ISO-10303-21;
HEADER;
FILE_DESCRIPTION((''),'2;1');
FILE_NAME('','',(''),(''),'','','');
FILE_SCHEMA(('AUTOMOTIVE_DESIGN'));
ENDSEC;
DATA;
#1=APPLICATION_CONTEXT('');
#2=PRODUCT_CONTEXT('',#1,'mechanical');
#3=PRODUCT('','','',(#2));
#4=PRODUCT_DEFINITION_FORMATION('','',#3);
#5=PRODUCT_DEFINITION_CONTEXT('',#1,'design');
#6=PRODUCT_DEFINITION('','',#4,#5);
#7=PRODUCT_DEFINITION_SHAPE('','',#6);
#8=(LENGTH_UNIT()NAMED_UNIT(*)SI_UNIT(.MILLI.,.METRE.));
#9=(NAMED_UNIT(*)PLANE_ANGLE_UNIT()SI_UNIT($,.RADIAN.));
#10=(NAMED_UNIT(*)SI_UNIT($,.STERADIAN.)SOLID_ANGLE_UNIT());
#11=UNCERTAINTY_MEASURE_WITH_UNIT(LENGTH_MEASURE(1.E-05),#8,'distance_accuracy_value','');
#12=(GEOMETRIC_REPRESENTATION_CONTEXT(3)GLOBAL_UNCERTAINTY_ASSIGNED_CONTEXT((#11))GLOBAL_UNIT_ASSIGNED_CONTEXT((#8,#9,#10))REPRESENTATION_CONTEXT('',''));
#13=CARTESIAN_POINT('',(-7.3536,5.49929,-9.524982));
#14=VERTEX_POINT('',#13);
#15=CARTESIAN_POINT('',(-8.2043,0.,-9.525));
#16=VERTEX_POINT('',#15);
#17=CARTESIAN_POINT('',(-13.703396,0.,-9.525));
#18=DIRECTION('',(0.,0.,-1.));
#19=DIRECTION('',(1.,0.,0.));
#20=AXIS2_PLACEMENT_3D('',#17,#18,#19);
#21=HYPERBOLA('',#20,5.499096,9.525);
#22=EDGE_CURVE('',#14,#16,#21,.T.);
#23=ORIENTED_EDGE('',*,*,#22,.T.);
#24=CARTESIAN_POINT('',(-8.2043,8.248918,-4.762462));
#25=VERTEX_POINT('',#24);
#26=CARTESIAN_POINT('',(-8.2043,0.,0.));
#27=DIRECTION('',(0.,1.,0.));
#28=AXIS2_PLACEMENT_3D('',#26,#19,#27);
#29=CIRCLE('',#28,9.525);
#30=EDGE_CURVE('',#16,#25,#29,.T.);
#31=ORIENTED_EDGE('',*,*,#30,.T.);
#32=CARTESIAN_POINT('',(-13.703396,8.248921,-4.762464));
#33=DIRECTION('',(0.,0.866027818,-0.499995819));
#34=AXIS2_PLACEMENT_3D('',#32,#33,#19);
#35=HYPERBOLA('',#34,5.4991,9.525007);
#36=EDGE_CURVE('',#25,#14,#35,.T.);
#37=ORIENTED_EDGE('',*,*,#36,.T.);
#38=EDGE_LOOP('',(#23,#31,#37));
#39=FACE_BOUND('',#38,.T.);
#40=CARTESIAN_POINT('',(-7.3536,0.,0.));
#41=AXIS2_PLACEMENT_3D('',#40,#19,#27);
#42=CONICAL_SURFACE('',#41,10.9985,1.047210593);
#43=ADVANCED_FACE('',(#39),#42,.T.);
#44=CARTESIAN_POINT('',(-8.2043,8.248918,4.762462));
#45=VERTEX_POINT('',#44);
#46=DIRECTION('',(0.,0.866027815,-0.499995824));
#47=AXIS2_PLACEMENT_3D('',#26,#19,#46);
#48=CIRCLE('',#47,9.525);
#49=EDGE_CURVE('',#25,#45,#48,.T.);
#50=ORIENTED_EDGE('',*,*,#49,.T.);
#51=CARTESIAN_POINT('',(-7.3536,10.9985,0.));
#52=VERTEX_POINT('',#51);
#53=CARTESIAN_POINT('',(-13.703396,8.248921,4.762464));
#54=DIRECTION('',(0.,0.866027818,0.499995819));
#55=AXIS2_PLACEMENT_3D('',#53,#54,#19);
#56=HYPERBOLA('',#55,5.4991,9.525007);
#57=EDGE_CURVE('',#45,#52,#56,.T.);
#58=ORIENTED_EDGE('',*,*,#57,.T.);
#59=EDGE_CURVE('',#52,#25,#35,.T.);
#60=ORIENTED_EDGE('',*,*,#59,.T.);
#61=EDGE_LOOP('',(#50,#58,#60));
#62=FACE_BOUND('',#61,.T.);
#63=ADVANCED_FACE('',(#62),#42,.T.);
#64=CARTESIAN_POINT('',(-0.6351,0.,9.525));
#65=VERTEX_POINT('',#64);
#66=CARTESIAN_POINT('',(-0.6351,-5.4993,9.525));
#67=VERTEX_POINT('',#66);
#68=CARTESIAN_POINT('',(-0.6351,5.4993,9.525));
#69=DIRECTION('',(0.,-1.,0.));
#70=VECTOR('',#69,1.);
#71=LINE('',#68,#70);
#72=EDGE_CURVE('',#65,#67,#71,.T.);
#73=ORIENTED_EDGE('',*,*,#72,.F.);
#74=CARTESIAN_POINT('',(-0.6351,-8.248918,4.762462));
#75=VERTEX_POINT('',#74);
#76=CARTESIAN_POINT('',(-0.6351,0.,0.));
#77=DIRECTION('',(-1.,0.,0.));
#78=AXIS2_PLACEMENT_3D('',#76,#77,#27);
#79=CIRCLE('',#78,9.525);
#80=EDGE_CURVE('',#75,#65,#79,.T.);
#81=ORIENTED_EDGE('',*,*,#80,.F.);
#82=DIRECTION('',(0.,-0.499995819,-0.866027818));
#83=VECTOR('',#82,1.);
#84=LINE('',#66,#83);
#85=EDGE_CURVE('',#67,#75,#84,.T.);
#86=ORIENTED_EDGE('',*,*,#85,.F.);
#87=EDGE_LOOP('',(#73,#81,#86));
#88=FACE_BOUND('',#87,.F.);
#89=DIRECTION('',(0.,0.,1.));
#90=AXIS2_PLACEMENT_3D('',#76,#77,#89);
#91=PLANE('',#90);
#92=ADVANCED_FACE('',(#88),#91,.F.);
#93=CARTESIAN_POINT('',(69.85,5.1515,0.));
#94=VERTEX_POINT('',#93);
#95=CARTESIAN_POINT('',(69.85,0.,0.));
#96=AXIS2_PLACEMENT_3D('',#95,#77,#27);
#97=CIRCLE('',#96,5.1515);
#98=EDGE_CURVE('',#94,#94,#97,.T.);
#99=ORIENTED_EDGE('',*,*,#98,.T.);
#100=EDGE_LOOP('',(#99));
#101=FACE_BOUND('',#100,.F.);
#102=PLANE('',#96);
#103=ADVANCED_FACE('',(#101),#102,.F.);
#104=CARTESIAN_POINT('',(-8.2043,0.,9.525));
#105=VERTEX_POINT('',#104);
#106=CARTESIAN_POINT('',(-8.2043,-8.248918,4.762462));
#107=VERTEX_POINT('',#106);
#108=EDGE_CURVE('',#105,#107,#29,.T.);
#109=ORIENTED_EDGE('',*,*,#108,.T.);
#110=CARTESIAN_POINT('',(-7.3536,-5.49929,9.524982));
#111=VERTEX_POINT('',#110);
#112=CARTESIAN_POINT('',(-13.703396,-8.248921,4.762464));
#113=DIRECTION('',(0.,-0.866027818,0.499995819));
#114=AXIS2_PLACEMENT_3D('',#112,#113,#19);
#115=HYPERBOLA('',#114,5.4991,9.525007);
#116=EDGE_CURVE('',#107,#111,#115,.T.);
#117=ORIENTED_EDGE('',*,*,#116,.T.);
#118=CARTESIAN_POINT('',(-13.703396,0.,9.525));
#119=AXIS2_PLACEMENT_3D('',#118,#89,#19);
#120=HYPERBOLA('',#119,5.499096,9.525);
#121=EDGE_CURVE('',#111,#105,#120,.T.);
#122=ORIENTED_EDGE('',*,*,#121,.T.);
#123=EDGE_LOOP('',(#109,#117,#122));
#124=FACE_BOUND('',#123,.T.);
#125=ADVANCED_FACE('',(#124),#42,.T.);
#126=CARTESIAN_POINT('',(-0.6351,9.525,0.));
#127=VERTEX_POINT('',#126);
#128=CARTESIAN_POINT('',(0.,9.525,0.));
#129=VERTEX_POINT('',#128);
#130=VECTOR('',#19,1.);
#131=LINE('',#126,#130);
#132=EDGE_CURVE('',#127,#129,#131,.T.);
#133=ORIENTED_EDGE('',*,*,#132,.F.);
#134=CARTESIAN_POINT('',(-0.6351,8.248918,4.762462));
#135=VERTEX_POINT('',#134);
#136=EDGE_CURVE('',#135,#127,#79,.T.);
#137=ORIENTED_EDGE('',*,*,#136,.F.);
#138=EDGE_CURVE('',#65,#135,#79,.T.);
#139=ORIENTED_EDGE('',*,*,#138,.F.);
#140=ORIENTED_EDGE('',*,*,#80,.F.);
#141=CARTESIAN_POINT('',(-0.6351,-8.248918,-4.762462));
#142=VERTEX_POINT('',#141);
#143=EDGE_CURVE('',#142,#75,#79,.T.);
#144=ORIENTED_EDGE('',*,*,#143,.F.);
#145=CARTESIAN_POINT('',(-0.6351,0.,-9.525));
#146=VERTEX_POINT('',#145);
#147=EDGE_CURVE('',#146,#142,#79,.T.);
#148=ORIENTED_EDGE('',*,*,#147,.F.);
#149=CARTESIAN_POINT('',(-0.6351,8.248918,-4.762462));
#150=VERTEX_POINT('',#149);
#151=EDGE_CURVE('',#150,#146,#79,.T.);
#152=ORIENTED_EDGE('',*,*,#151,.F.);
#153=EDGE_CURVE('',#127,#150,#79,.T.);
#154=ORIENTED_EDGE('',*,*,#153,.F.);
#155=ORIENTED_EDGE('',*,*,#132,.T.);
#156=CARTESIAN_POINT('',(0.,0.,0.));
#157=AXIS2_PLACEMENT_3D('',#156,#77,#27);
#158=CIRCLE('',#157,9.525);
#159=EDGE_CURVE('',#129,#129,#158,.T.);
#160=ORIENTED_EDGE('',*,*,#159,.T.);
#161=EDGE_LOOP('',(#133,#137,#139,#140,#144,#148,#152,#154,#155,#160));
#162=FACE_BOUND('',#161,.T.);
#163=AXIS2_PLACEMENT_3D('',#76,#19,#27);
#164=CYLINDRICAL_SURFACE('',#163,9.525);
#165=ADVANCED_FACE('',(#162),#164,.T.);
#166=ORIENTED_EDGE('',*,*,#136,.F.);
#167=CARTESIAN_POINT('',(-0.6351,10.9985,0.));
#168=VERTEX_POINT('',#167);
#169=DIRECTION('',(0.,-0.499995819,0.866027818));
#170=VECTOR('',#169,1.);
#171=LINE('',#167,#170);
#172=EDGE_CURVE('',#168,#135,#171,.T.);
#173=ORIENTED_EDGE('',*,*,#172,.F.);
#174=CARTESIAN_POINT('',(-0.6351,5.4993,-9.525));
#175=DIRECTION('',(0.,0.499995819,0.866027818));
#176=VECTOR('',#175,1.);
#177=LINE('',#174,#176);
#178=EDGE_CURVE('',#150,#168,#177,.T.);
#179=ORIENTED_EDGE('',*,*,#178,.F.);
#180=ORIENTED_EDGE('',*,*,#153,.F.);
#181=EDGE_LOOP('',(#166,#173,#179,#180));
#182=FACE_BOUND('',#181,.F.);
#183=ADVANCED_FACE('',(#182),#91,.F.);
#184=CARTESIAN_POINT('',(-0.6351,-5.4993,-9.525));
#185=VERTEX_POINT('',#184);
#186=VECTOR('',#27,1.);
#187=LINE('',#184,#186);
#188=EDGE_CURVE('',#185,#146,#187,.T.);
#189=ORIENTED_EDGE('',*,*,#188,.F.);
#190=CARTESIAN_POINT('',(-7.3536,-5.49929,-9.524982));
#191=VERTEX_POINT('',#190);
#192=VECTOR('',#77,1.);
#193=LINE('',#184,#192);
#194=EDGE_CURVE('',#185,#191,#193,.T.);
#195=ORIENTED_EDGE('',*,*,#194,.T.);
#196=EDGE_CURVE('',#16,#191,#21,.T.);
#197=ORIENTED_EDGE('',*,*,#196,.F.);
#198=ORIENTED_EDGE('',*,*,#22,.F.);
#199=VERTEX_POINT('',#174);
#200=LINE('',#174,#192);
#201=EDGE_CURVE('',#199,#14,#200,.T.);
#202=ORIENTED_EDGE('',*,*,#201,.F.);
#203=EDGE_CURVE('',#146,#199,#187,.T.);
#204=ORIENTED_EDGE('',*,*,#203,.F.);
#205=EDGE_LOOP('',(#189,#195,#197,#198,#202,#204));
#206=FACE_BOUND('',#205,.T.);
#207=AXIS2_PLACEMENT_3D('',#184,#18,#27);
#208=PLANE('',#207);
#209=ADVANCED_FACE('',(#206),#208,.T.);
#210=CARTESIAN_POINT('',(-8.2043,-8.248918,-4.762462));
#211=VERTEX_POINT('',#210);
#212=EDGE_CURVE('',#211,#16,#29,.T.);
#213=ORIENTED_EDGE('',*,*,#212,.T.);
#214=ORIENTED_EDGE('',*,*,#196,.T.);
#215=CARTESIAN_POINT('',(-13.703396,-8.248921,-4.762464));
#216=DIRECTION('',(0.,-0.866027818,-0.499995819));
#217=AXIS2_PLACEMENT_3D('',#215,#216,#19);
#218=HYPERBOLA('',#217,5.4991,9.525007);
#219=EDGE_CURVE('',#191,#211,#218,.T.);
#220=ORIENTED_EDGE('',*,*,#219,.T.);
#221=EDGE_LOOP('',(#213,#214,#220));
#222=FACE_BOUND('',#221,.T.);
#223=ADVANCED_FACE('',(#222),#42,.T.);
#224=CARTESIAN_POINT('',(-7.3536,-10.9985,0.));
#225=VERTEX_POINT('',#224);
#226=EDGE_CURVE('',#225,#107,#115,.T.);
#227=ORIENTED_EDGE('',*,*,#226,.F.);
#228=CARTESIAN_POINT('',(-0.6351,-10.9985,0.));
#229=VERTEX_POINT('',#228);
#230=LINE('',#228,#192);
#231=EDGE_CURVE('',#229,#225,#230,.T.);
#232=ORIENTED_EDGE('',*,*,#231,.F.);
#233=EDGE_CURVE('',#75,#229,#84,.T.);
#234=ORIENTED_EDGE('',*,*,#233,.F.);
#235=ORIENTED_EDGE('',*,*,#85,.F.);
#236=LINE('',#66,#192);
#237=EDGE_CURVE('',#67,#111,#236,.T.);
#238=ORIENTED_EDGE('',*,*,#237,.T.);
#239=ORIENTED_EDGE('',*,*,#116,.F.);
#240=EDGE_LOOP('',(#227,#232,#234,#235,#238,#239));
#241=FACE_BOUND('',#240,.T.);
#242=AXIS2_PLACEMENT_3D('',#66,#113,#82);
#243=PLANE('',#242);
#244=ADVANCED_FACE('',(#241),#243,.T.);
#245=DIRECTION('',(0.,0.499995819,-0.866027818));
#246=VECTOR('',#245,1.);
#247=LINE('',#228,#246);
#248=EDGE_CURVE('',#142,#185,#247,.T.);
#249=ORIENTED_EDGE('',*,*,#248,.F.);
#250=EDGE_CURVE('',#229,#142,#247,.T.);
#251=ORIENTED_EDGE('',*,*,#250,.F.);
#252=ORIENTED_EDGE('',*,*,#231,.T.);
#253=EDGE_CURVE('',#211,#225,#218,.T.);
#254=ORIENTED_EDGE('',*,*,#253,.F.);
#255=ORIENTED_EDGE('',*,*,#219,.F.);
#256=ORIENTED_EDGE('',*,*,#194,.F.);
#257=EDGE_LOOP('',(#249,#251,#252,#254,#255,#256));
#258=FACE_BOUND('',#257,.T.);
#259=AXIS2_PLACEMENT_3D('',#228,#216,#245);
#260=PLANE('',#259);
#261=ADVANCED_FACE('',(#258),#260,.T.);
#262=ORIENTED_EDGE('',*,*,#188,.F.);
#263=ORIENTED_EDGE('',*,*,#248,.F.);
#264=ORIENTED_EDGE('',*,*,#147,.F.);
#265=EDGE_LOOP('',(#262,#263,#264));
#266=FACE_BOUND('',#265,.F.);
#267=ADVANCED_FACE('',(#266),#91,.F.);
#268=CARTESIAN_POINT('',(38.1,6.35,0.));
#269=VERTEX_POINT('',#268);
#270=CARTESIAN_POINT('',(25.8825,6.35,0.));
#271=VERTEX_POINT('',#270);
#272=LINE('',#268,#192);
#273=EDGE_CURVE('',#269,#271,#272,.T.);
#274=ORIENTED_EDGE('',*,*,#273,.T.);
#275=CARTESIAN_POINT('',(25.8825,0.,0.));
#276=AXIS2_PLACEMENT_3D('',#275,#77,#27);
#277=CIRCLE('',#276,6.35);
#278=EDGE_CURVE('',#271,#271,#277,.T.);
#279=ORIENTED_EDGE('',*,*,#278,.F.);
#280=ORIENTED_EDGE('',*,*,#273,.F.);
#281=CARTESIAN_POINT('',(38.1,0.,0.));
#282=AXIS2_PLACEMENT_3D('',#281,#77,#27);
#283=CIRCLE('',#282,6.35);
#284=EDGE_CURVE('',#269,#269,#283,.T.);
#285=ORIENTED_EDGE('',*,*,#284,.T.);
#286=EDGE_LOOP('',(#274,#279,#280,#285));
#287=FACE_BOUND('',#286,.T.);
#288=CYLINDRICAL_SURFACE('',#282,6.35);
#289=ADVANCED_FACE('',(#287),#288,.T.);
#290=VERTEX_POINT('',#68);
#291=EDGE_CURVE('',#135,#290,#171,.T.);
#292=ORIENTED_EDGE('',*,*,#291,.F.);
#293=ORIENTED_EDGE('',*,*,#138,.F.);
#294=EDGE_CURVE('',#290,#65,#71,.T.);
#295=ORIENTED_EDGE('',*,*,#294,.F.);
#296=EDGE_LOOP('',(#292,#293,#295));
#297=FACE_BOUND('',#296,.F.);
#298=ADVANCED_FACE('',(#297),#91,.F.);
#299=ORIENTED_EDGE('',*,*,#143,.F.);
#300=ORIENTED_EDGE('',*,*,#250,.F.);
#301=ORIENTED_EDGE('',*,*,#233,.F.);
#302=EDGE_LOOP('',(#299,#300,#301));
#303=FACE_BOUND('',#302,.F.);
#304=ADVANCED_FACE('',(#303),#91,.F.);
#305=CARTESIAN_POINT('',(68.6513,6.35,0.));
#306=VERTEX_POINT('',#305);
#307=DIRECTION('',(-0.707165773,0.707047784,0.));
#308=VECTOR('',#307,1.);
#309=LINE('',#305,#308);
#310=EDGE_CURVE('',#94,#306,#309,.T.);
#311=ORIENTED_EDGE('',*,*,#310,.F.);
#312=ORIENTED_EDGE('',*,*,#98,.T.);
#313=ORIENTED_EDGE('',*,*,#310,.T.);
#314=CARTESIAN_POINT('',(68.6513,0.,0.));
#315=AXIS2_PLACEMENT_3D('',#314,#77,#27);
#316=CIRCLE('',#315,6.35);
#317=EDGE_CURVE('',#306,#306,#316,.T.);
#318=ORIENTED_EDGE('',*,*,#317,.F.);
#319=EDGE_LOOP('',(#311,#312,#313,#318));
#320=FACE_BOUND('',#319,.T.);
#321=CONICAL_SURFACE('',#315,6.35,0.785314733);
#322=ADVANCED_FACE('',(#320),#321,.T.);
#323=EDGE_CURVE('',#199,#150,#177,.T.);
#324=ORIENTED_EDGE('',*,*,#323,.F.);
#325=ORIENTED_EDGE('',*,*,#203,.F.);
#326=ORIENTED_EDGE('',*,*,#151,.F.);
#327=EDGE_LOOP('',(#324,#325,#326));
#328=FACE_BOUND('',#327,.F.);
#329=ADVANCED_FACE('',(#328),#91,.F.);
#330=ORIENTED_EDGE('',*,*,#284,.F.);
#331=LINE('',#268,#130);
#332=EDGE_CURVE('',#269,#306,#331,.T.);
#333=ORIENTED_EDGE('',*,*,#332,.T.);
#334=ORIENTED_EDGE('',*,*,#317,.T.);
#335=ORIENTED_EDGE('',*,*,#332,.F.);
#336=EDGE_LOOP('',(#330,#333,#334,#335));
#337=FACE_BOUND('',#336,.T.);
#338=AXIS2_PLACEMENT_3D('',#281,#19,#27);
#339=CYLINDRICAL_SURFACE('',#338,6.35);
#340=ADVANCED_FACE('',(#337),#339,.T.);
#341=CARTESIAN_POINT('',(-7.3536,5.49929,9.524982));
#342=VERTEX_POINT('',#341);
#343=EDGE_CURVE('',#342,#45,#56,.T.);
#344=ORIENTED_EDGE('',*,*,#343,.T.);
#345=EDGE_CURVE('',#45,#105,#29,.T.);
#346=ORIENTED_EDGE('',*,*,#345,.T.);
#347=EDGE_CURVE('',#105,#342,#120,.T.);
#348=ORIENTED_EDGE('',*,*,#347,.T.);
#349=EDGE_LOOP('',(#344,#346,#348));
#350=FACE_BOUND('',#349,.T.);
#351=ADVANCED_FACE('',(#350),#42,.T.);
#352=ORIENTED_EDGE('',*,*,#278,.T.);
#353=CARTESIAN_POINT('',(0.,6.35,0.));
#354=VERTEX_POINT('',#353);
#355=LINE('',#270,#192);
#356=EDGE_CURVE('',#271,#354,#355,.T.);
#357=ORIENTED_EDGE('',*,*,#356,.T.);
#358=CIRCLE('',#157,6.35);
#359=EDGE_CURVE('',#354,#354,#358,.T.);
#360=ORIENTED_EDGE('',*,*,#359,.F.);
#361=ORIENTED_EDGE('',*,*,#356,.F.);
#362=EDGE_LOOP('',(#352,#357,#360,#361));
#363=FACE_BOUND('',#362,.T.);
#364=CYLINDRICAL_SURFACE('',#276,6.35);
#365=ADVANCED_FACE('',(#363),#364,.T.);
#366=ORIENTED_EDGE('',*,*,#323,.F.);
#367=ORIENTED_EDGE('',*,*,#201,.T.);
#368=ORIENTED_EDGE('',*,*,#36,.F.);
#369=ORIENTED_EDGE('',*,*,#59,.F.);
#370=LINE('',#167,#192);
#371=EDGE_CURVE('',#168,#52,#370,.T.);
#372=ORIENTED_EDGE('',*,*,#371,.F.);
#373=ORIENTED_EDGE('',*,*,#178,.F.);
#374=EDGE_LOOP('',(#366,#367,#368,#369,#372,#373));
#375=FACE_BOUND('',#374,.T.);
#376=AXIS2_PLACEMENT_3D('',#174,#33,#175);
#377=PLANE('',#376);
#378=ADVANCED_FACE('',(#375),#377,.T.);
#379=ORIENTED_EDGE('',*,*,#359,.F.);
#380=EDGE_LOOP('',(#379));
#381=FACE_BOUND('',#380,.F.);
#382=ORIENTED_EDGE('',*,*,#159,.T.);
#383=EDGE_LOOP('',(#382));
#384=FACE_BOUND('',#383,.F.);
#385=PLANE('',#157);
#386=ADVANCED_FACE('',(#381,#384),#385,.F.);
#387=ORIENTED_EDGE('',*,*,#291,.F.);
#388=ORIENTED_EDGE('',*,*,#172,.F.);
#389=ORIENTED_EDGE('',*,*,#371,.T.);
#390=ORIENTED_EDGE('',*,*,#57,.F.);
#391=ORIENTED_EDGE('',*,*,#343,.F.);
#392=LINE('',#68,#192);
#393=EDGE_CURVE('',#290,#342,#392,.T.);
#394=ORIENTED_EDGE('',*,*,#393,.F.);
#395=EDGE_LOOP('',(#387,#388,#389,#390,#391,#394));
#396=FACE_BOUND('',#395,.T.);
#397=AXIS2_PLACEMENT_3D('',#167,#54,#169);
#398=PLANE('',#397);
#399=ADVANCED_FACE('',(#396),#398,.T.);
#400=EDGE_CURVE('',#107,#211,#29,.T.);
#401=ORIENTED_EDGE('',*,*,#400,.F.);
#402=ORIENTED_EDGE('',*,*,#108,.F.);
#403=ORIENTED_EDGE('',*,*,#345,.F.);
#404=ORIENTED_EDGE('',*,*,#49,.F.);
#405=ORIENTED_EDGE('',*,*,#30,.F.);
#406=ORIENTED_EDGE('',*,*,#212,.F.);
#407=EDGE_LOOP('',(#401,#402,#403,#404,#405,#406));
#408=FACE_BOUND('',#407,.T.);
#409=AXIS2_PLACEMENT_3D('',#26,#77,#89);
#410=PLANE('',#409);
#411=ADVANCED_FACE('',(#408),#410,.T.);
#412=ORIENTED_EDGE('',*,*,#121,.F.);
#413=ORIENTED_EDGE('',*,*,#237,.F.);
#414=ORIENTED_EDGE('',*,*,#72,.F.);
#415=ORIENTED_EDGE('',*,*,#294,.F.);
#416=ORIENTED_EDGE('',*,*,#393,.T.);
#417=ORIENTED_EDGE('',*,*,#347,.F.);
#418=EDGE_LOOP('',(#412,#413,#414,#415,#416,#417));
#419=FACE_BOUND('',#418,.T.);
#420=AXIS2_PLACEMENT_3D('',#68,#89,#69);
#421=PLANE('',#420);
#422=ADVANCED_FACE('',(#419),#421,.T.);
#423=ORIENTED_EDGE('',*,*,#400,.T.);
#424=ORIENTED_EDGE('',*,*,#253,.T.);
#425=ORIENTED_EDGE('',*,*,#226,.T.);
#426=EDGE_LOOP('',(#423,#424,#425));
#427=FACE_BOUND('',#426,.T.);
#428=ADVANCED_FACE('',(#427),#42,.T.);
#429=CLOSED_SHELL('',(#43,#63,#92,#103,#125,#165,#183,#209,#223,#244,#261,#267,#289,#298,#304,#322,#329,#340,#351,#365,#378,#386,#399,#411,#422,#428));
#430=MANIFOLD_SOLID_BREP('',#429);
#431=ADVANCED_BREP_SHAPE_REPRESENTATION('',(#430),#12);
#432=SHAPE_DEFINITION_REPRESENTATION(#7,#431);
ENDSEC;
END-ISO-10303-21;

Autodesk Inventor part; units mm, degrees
ref_plane "YZ Plane" through (0, 0, 0) normal (1, 0, 0) x (0, 1, 0)
ref_plane "XZ Plane" through (0, 0, 0) normal (0, 1, 0) x (-1, 0, 0)
sketch "Sketch1" plane through (0, 0, 0) normal (0, 0, 1) x (1, 0, 0)
  line L0 (0, 9.525) -> (0, 6.35)
  line L1 (38.1, 6.35) -> (69.85, 6.35)
  line L2 (69.85, 6.35) -> (69.85, 0)
  line L3 (69.85, 0) -> (-0.6351, 0)
  line L4 (-14.7321, 0) -> (83.947, 0) projected
  line L5 (-0.6351, 0) -> (-0.6351, 9.525)
  line L6 (-0.6351, 9.525) -> (0, 9.525)
  line L7 (38.1, 6.35) -> (25.8825, 6.35)
  line L8 (25.8825, 6.35) -> (0, 6.35)
  line L9 (0, -1.905) -> (0, 11.43) projected
  dimension "d0" = 69.85
  dimension "d1" = 31.75
  dimension "d2" = 12.7
  dimension "d9" = 0.6351
  dimension "d10" = 19.05
  dimension "d13" = 12.2175
  dimension "d14" = 12.7
revolve "Body" add sketch "Sketch1" angle 360 about axis through (69.85, 0, 0) along (-1, 0, 0)
sketch "Sketch2" plane through (-0.6351, 0, 0) normal (-1, 0, 0) x (0, 0, 1)
  line L0 (0, 10.9985) -> (9.525, 5.4993)
  line L1 (9.525, 5.4993) -> (9.525, -5.4993)
  line L2 (9.525, -5.4993) -> (0, -10.9985)
  line L3 (0, -10.9985) -> (-9.525, -5.4993)
  line L4 (-9.525, -5.4993) -> (-9.525, 5.4993)
  line L5 (-9.525, 5.4993) -> (0, 10.9985)
  point P0 (0, 0)
  point P1 (0, 0)
  dimension "d11" = 19.05
extrude "Head" add sketch "Sketch2" along normal blind 7.5692
sketch "Sketch4" plane through (0, 0, 0) normal (0, 0, 1) x (1, 0, 0)
  line L0 (-8.2043, 9.525) -> (-8.2043, 10.9985)
  line L1 (-8.2043, 10.9985) -> (-7.3536, 10.9985)
  line L2 (-7.3536, 10.9985) -> (-8.2043, 9.525)
  line L3 (-9.7181, 0) -> (0.8787, 0) projected
  line L4 (-0.6351, 10.9985) -> (-8.2043, 10.9985) projected
  line L5 (-8.2043, 5.4993) -> (-8.2043, 10.9985) projected
  dimension "d5" = 30
  dimension "d19" = 19.05
revolve "Chamfer1" cut sketch "Sketch4" angle 360 about axis through (-10, 0, 0) along (1, 0, 0)
thread "Thread" size "1/2-13 UNC" class "2A" standard "ANSI Unified Screw Threads" length 31.75
chamfer "Chamfer2" distance 1.1985 distance2 1.1987 1 edges at (69.85, -6.35, 0) measured on face at (69.85, 1.2024, 1.742)
ref_plane "Work Plane1" through (1.525, 0, 0) normal (0, 0, 1) x (1, 0, 0)
equation "\"d0\" = NLG"
equation "\"d1\" = GEL"
equation "\"d2\" = GD"
equation "\"d10\" = SD2"
equation "\"d14\" = BDM"
equation "\"d11\" = SW"
equation "\"d3\" = KOH - SD"
equation "\"d5\" = ANG1"
equation "\"d19\" = SW0"
equation "\"d15\" = GEL"
equation "\"d6\" = -0.5 * SPD + 0.5 * GD"
equation "\"NLG\" = 69.85"
equation "\"GD\" = 12.7"
equation "\"BDM\" = 12.7"
equation "\"KOH\" = 8.2042"
equation "\"GEL\" = 31.75"
equation "\"SW\" = 19.05"
equation "\"SW0\" = SW"
equation "\"SPD\" = GD1"
equation "\"SD2\" = SW"
equation "\"SD\" = 0.635"
equation "\"ANG1\" = 30deg"
equation "\"GAL\" = 12.2174"
equation "\"GUL\" = 1.19863"
equation "\"RR\" = 0.381"
equation "\"WFT\" = SD"
equation "\"GD1\" = 10.303"
equation "\"THREADDIA\" = 12.7"
equation "\"SDH\" = SW"
equation "\"SDHG\" = 25.8826"
equation "\"TOA\" = 30deg"
equation "\"FAWI\" = 45deg"
equation "\"NND\" = 12.7"
equation "\"E0\" = 22.00275"
properties part number "AS 2465 - 1/2 x 2 3/4  UNC" material "Steel, Mild"
